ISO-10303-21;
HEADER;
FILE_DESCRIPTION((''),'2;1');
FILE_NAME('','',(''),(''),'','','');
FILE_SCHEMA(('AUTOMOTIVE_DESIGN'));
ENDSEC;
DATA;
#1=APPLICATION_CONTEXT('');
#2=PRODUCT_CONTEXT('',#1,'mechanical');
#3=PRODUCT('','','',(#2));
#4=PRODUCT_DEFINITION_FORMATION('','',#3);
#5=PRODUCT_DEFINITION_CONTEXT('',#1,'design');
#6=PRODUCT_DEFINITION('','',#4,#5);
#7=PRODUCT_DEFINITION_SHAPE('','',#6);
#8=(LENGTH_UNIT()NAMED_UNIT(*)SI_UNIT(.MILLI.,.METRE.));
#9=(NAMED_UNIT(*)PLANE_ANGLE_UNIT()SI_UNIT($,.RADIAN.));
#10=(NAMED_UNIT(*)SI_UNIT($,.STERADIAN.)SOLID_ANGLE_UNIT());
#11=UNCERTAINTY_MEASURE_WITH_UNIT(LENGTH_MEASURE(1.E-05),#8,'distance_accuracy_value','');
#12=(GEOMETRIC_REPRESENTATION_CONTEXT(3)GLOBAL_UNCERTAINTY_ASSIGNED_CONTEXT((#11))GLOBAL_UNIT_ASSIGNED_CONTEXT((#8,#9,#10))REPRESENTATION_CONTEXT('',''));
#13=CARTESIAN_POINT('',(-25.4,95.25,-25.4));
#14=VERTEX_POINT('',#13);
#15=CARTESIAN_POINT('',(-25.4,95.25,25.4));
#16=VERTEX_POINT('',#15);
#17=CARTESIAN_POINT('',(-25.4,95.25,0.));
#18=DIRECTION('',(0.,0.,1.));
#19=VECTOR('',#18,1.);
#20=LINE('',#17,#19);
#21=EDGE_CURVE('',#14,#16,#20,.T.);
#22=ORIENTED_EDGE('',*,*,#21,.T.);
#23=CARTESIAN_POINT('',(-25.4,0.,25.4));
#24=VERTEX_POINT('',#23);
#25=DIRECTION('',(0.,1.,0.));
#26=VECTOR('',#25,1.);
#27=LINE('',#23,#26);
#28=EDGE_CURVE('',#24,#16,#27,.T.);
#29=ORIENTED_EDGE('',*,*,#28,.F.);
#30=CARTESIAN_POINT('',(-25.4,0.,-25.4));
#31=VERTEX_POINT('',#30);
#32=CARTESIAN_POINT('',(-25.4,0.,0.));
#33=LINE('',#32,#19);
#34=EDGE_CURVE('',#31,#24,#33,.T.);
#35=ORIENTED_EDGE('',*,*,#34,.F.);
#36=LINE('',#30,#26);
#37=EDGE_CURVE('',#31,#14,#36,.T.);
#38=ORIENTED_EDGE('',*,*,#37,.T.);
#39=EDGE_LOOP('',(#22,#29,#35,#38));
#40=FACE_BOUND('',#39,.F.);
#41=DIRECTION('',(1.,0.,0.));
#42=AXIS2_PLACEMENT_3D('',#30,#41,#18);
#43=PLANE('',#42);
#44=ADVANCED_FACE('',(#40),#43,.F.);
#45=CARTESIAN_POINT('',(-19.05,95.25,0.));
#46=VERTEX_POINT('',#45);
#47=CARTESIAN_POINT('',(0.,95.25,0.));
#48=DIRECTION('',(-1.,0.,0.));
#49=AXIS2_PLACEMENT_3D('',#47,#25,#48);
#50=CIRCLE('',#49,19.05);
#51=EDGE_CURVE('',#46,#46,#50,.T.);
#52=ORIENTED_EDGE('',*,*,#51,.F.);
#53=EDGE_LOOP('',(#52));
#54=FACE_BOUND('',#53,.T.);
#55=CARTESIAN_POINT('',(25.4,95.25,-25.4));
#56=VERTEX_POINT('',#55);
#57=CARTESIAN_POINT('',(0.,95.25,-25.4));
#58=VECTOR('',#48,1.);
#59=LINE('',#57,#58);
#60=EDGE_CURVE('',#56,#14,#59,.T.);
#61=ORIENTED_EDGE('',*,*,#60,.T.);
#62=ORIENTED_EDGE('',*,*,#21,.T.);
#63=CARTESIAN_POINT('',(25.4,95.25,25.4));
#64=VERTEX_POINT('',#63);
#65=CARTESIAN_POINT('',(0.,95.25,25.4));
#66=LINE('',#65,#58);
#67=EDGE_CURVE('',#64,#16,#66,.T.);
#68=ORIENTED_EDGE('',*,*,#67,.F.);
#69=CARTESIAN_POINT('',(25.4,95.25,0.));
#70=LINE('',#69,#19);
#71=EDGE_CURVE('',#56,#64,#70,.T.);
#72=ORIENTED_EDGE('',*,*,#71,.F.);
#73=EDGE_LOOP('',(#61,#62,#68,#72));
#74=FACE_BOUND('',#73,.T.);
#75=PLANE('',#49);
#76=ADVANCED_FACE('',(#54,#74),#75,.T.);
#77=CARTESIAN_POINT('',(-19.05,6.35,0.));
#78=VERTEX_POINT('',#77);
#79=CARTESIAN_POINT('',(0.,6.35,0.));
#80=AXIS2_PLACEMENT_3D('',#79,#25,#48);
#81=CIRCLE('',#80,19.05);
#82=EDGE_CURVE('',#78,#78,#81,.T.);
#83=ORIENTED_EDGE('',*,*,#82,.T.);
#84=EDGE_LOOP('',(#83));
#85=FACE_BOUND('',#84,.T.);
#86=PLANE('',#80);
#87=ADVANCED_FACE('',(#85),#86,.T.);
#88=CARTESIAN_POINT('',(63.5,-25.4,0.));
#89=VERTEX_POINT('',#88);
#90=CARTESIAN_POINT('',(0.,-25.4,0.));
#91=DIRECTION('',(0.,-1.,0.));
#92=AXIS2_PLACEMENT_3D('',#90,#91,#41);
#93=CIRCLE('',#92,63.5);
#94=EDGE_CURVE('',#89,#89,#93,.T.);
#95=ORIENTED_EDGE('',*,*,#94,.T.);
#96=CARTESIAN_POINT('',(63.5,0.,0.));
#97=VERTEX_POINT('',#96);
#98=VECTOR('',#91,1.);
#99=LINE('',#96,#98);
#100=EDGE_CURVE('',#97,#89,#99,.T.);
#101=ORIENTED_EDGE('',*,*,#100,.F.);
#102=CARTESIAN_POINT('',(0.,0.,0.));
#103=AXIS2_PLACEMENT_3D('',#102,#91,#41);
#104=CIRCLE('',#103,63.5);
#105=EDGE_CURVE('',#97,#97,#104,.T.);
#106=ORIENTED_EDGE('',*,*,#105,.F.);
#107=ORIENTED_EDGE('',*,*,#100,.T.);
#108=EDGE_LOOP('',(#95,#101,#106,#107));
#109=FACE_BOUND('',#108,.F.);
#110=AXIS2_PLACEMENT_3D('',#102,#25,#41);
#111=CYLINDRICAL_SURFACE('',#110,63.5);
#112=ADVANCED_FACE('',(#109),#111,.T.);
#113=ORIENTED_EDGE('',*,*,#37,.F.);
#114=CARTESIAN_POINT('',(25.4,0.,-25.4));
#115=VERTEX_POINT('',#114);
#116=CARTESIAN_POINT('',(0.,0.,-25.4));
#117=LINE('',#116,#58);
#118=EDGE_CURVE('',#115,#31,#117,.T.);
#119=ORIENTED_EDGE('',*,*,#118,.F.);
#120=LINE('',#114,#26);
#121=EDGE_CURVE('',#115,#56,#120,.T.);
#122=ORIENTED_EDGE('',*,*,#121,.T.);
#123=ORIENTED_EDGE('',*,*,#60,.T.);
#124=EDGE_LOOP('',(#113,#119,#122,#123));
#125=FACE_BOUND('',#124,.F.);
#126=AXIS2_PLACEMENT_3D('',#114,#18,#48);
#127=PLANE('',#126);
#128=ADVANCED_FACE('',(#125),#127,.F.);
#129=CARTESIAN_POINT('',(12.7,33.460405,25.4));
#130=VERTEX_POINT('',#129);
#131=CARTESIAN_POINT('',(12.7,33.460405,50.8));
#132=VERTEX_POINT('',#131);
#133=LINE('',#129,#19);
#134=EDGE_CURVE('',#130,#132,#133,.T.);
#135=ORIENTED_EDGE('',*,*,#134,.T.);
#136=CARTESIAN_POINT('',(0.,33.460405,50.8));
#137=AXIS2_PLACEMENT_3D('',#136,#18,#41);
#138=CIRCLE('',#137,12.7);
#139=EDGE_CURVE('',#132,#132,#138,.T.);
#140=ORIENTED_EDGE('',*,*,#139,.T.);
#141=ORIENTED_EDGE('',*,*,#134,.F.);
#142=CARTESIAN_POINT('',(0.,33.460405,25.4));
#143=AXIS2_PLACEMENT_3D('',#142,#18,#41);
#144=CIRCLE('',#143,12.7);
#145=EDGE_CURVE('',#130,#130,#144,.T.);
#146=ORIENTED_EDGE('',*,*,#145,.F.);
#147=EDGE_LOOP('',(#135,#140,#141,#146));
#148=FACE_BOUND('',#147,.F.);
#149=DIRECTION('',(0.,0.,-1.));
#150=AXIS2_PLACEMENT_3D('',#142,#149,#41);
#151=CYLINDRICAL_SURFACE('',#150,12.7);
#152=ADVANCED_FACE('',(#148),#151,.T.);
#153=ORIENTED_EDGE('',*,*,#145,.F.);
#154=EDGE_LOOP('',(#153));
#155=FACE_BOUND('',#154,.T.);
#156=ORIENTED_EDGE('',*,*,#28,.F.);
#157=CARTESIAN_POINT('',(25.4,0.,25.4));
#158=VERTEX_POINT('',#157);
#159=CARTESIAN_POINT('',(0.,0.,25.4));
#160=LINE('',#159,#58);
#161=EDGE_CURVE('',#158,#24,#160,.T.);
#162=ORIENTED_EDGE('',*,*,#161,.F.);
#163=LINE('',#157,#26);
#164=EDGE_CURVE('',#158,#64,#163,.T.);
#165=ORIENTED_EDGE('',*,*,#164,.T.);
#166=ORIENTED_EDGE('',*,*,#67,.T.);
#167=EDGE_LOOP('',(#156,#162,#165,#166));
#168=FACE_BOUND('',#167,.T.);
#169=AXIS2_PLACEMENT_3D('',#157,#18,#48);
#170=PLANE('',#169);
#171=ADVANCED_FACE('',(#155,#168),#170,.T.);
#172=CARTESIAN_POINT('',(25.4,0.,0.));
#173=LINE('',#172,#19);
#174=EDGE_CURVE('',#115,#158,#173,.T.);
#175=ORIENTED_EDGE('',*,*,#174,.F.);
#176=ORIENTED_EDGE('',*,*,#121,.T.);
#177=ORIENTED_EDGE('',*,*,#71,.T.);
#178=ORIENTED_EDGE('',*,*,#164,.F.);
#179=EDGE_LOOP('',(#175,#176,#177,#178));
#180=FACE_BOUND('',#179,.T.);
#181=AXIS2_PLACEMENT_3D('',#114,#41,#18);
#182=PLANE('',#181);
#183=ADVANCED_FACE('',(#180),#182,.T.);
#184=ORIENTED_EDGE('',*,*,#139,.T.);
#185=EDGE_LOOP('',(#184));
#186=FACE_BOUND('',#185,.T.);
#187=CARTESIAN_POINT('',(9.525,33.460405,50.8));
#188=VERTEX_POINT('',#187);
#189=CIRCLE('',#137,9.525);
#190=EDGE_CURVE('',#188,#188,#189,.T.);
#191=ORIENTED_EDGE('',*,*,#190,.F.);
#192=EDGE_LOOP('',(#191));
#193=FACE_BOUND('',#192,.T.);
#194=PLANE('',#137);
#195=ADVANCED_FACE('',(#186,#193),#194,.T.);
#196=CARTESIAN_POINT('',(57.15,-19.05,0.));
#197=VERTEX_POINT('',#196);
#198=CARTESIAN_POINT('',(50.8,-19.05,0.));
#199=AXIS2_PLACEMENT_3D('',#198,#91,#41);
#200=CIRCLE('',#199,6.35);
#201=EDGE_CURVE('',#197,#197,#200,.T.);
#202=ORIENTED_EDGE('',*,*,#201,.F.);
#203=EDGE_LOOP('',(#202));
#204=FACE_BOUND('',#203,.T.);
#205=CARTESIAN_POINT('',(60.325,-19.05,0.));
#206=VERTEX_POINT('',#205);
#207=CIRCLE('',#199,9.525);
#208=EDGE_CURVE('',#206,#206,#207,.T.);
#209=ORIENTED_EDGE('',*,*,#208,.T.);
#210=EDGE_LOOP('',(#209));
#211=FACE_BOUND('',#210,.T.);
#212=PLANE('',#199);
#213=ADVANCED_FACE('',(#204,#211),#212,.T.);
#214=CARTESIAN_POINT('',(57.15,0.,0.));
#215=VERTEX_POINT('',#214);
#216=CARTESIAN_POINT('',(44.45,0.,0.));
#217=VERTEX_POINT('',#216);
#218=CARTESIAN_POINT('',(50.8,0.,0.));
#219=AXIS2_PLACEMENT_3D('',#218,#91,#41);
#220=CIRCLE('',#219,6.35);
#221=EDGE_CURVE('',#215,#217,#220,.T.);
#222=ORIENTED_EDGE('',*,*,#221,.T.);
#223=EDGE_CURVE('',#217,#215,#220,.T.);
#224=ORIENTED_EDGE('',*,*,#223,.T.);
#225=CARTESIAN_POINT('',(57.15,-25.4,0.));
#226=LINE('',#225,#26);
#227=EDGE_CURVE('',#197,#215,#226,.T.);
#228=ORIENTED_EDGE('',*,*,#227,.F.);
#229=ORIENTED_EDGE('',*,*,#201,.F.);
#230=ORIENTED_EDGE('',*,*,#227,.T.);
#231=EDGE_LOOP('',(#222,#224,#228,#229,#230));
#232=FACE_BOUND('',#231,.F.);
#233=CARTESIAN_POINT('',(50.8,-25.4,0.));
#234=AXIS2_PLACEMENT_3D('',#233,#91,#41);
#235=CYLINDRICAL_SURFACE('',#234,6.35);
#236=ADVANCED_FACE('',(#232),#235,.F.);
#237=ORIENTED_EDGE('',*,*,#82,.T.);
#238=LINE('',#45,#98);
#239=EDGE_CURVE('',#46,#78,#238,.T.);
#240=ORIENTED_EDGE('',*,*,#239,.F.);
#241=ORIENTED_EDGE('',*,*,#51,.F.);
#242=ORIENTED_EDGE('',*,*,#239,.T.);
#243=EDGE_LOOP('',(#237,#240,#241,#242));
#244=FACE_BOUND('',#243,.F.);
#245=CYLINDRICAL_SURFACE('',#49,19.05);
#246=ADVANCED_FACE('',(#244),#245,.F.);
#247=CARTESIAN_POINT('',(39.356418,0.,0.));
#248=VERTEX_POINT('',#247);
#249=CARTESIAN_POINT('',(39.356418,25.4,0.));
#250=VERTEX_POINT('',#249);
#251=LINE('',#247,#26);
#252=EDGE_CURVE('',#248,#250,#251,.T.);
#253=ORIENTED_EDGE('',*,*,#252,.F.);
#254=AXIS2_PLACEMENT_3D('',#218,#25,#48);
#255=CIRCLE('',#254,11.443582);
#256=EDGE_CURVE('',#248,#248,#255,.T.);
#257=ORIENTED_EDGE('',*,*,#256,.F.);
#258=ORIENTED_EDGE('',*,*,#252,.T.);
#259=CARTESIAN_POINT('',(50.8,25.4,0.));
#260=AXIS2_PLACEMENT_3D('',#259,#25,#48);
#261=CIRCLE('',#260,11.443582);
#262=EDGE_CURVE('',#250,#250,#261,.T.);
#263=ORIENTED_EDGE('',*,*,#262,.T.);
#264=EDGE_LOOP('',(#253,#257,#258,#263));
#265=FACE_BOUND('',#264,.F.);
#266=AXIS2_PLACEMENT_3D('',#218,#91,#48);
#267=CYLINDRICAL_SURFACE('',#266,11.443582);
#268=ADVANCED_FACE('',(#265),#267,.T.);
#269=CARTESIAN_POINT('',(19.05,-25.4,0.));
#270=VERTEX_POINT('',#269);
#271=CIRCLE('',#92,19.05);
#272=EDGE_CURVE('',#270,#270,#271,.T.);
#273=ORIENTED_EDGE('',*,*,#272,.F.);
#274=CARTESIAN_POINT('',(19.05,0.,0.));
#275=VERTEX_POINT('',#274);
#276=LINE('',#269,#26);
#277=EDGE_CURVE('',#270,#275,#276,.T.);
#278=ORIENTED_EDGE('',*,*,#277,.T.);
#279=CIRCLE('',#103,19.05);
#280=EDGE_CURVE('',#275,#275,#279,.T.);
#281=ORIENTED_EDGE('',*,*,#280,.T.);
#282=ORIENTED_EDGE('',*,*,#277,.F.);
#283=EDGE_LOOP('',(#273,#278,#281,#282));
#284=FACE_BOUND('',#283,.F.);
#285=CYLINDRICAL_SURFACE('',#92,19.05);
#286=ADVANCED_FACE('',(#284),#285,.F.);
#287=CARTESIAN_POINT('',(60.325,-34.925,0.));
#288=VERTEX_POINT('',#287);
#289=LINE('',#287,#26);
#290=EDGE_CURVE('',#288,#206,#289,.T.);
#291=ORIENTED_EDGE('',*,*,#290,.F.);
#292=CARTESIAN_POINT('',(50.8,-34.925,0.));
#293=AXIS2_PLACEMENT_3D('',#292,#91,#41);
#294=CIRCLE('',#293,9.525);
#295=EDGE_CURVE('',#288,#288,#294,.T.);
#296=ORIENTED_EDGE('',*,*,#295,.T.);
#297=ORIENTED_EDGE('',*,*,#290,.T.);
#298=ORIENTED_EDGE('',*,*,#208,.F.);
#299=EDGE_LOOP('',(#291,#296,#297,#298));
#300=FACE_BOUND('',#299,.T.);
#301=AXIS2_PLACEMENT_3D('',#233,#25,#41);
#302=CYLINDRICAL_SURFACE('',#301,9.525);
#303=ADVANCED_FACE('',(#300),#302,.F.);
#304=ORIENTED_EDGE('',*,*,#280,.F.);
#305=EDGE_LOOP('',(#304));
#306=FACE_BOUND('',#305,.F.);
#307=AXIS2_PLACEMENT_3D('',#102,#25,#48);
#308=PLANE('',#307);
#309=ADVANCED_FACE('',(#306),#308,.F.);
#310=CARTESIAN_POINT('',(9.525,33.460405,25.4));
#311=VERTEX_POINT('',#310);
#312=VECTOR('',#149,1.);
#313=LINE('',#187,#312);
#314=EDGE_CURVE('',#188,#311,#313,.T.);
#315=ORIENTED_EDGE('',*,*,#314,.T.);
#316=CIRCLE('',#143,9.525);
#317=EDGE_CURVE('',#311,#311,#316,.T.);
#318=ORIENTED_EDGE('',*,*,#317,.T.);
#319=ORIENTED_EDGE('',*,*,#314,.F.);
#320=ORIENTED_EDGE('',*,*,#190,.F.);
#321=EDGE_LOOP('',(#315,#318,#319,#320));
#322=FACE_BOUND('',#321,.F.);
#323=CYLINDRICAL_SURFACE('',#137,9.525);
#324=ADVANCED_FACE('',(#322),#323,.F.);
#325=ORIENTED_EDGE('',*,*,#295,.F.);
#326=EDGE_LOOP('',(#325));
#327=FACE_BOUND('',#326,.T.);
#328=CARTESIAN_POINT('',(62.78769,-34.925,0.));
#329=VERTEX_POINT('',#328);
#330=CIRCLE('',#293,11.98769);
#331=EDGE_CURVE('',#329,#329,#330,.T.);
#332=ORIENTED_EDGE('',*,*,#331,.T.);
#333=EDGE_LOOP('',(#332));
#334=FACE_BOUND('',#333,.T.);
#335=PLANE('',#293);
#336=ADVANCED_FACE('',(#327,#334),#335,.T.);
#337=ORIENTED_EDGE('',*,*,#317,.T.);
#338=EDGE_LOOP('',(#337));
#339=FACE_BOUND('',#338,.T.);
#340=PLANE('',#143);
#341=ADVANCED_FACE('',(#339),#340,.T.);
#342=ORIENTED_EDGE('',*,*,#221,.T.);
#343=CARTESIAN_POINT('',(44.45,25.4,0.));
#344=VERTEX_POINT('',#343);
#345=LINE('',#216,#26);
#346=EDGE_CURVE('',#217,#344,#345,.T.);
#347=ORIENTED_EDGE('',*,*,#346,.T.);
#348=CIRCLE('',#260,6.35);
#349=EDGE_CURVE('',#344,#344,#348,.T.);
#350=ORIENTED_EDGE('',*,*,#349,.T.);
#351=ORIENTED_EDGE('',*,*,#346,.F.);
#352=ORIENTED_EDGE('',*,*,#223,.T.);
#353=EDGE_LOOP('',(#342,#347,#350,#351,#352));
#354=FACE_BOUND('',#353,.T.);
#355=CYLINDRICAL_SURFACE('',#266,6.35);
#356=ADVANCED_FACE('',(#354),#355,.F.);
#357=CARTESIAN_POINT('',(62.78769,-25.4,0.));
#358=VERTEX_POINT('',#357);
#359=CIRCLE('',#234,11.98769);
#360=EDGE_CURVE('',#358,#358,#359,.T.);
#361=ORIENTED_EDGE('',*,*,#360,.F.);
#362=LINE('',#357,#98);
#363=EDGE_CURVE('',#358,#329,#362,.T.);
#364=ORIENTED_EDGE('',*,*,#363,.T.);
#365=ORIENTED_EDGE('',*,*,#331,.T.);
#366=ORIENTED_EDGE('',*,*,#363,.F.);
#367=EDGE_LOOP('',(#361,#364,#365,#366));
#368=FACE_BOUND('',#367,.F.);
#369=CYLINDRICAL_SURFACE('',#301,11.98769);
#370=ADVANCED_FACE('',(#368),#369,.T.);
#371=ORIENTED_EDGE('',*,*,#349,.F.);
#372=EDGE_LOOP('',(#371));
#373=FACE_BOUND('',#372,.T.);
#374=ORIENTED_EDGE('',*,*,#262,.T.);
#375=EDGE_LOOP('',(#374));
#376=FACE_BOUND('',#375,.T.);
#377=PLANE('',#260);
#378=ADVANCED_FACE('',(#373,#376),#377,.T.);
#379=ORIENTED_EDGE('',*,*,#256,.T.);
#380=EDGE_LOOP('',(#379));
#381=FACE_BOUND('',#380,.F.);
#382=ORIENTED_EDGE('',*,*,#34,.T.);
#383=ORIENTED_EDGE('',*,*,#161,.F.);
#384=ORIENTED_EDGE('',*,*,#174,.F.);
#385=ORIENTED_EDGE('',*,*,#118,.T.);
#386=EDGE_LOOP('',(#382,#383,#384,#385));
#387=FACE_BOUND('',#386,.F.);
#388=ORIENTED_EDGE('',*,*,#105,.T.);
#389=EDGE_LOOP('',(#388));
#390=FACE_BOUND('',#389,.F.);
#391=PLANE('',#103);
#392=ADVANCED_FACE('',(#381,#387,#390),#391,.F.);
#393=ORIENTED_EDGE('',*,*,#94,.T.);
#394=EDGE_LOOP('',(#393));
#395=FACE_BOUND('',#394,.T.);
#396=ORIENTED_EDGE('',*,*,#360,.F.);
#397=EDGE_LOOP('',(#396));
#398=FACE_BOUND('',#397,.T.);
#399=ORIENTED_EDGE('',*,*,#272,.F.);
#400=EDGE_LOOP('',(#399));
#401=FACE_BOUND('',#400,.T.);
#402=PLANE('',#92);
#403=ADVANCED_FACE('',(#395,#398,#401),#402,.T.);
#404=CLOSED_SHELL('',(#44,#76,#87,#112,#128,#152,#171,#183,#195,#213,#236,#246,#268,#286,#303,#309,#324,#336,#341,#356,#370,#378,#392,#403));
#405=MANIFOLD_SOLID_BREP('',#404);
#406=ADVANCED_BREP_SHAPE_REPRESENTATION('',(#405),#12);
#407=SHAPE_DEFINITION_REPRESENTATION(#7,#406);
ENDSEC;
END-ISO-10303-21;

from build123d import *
from build123d import SkipClean  # not in build123d's __all__

# Parameters (mm, degrees)
F0_R      = 63.5
F1_DEPTH  = 25.4
F2_R      = 19.05
F3_DEPTH  = 25.401
F4_R      = 6.35
F5_DEPTH  = 25.4
F6_R      = 9.525
F7_DEPTH  = 6.35
F8_W      = 50.8
F8_H      = 50.8
F9_DEPTH  = 95.25
F10_R     = 19.05
F11_DEPTH = 88.9
F12_R     = 11.4435821265
F12_R_2   = 8.6754099319
F12_R_3   = 6.35
F13_DEPTH = 25.4
F14_R     = 12.7
F15_DEPTH = 25.4
F16_R     = 9.525
F17_DEPTH = 25.4
F18_R     = 11.9876896331
F18_R_2   = 9.525
F19_DEPTH = 9.525


# Not quite as in the source:
# - after a boolean that leaves OpenCascade's solid faulty, fix() repairs it


with BuildPart() as f1:
    # F0 (on Front) → F1 (new body)
    with BuildSketch(Plane.XZ):
        Circle(F0_R)
    extrude(amount=F1_DEPTH)

    # F2 (on face) → F3 (cut, through all)
    with BuildSketch(Plane.XZ.offset(25.4)):
        Circle(F2_R)
    extrude(amount=-F3_DEPTH, mode=Mode.SUBTRACT)

    # F4 (on face) → F5 (cut)
    with BuildSketch(Plane.XZ.offset(25.4)):
        with Locations((50.8, 0)):
            Circle(F4_R)
    extrude(amount=-F5_DEPTH, mode=Mode.SUBTRACT)

    # F6 (on face) → F7 (cut)
    with BuildSketch(Plane.XZ.offset(25.4)):
        with Locations((50.8, 0)):
            Circle(F6_R)
    extrude(amount=-F7_DEPTH, mode=Mode.SUBTRACT)

    # F8 (on face) → F9 (join)
    with BuildSketch(Plane(origin=(0, 0, 0), x_dir=(-1, 0, 0), z_dir=(0, 1, 0))):
        Rectangle(F8_W, F8_H)
    extrude(amount=F9_DEPTH)

    # F10 (on face) → F11 (cut)
    with BuildSketch(Plane(origin=(0, 95.25, 0), x_dir=(-1, 0, 0), z_dir=(0, 1, 0))):
        Circle(F10_R)
    extrude(amount=-F11_DEPTH, mode=Mode.SUBTRACT)

    # F12 (on face) → F13 (join)
    with BuildSketch(Plane(origin=(0, 0, 0), x_dir=(-1, 0, 0), z_dir=(0, 1, 0))):
        with Locations((-50.8, 0)):
            Circle(F12_R)
        with Locations((-50.8, 0)):
            Circle(F12_R_2, mode=Mode.SUBTRACT)
        with Locations((-50.8, 0)):
            Circle(F12_R_2)
        with Locations((-50.8, 0)):
            Circle(F12_R_3, mode=Mode.SUBTRACT)
    with SkipClean():  # cleaning this boolean's faces spoils the solid; the shape is the same uncleaned
        extrude(amount=F13_DEPTH)

    # F14 (on face) → F15 (join)
    with BuildSketch(Plane.XY.offset(25.4)):
        with Locations((0, 33.4604047239)):
            Circle(F14_R)
    extrude(amount=F15_DEPTH)

    add(f1.part.fix(), mode=Mode.REPLACE)

    # F16 (on face) → F17 (cut)
    with BuildSketch(Plane.XY.offset(50.8)):
        with Locations((0, 33.4604047239)):
            Circle(F16_R)
    extrude(amount=-F17_DEPTH, mode=Mode.SUBTRACT)

    add(f1.part.fix(), mode=Mode.REPLACE)

    # F18 (on face) → F19 (join)
    with BuildSketch(Plane.XZ.offset(25.4)):
        with Locations((50.8, 0)):
            Circle(F18_R)
        with Locations((50.8, 0)):
            Circle(F18_R_2, mode=Mode.SUBTRACT)
    extrude(amount=F19_DEPTH)


solid = f1.part
